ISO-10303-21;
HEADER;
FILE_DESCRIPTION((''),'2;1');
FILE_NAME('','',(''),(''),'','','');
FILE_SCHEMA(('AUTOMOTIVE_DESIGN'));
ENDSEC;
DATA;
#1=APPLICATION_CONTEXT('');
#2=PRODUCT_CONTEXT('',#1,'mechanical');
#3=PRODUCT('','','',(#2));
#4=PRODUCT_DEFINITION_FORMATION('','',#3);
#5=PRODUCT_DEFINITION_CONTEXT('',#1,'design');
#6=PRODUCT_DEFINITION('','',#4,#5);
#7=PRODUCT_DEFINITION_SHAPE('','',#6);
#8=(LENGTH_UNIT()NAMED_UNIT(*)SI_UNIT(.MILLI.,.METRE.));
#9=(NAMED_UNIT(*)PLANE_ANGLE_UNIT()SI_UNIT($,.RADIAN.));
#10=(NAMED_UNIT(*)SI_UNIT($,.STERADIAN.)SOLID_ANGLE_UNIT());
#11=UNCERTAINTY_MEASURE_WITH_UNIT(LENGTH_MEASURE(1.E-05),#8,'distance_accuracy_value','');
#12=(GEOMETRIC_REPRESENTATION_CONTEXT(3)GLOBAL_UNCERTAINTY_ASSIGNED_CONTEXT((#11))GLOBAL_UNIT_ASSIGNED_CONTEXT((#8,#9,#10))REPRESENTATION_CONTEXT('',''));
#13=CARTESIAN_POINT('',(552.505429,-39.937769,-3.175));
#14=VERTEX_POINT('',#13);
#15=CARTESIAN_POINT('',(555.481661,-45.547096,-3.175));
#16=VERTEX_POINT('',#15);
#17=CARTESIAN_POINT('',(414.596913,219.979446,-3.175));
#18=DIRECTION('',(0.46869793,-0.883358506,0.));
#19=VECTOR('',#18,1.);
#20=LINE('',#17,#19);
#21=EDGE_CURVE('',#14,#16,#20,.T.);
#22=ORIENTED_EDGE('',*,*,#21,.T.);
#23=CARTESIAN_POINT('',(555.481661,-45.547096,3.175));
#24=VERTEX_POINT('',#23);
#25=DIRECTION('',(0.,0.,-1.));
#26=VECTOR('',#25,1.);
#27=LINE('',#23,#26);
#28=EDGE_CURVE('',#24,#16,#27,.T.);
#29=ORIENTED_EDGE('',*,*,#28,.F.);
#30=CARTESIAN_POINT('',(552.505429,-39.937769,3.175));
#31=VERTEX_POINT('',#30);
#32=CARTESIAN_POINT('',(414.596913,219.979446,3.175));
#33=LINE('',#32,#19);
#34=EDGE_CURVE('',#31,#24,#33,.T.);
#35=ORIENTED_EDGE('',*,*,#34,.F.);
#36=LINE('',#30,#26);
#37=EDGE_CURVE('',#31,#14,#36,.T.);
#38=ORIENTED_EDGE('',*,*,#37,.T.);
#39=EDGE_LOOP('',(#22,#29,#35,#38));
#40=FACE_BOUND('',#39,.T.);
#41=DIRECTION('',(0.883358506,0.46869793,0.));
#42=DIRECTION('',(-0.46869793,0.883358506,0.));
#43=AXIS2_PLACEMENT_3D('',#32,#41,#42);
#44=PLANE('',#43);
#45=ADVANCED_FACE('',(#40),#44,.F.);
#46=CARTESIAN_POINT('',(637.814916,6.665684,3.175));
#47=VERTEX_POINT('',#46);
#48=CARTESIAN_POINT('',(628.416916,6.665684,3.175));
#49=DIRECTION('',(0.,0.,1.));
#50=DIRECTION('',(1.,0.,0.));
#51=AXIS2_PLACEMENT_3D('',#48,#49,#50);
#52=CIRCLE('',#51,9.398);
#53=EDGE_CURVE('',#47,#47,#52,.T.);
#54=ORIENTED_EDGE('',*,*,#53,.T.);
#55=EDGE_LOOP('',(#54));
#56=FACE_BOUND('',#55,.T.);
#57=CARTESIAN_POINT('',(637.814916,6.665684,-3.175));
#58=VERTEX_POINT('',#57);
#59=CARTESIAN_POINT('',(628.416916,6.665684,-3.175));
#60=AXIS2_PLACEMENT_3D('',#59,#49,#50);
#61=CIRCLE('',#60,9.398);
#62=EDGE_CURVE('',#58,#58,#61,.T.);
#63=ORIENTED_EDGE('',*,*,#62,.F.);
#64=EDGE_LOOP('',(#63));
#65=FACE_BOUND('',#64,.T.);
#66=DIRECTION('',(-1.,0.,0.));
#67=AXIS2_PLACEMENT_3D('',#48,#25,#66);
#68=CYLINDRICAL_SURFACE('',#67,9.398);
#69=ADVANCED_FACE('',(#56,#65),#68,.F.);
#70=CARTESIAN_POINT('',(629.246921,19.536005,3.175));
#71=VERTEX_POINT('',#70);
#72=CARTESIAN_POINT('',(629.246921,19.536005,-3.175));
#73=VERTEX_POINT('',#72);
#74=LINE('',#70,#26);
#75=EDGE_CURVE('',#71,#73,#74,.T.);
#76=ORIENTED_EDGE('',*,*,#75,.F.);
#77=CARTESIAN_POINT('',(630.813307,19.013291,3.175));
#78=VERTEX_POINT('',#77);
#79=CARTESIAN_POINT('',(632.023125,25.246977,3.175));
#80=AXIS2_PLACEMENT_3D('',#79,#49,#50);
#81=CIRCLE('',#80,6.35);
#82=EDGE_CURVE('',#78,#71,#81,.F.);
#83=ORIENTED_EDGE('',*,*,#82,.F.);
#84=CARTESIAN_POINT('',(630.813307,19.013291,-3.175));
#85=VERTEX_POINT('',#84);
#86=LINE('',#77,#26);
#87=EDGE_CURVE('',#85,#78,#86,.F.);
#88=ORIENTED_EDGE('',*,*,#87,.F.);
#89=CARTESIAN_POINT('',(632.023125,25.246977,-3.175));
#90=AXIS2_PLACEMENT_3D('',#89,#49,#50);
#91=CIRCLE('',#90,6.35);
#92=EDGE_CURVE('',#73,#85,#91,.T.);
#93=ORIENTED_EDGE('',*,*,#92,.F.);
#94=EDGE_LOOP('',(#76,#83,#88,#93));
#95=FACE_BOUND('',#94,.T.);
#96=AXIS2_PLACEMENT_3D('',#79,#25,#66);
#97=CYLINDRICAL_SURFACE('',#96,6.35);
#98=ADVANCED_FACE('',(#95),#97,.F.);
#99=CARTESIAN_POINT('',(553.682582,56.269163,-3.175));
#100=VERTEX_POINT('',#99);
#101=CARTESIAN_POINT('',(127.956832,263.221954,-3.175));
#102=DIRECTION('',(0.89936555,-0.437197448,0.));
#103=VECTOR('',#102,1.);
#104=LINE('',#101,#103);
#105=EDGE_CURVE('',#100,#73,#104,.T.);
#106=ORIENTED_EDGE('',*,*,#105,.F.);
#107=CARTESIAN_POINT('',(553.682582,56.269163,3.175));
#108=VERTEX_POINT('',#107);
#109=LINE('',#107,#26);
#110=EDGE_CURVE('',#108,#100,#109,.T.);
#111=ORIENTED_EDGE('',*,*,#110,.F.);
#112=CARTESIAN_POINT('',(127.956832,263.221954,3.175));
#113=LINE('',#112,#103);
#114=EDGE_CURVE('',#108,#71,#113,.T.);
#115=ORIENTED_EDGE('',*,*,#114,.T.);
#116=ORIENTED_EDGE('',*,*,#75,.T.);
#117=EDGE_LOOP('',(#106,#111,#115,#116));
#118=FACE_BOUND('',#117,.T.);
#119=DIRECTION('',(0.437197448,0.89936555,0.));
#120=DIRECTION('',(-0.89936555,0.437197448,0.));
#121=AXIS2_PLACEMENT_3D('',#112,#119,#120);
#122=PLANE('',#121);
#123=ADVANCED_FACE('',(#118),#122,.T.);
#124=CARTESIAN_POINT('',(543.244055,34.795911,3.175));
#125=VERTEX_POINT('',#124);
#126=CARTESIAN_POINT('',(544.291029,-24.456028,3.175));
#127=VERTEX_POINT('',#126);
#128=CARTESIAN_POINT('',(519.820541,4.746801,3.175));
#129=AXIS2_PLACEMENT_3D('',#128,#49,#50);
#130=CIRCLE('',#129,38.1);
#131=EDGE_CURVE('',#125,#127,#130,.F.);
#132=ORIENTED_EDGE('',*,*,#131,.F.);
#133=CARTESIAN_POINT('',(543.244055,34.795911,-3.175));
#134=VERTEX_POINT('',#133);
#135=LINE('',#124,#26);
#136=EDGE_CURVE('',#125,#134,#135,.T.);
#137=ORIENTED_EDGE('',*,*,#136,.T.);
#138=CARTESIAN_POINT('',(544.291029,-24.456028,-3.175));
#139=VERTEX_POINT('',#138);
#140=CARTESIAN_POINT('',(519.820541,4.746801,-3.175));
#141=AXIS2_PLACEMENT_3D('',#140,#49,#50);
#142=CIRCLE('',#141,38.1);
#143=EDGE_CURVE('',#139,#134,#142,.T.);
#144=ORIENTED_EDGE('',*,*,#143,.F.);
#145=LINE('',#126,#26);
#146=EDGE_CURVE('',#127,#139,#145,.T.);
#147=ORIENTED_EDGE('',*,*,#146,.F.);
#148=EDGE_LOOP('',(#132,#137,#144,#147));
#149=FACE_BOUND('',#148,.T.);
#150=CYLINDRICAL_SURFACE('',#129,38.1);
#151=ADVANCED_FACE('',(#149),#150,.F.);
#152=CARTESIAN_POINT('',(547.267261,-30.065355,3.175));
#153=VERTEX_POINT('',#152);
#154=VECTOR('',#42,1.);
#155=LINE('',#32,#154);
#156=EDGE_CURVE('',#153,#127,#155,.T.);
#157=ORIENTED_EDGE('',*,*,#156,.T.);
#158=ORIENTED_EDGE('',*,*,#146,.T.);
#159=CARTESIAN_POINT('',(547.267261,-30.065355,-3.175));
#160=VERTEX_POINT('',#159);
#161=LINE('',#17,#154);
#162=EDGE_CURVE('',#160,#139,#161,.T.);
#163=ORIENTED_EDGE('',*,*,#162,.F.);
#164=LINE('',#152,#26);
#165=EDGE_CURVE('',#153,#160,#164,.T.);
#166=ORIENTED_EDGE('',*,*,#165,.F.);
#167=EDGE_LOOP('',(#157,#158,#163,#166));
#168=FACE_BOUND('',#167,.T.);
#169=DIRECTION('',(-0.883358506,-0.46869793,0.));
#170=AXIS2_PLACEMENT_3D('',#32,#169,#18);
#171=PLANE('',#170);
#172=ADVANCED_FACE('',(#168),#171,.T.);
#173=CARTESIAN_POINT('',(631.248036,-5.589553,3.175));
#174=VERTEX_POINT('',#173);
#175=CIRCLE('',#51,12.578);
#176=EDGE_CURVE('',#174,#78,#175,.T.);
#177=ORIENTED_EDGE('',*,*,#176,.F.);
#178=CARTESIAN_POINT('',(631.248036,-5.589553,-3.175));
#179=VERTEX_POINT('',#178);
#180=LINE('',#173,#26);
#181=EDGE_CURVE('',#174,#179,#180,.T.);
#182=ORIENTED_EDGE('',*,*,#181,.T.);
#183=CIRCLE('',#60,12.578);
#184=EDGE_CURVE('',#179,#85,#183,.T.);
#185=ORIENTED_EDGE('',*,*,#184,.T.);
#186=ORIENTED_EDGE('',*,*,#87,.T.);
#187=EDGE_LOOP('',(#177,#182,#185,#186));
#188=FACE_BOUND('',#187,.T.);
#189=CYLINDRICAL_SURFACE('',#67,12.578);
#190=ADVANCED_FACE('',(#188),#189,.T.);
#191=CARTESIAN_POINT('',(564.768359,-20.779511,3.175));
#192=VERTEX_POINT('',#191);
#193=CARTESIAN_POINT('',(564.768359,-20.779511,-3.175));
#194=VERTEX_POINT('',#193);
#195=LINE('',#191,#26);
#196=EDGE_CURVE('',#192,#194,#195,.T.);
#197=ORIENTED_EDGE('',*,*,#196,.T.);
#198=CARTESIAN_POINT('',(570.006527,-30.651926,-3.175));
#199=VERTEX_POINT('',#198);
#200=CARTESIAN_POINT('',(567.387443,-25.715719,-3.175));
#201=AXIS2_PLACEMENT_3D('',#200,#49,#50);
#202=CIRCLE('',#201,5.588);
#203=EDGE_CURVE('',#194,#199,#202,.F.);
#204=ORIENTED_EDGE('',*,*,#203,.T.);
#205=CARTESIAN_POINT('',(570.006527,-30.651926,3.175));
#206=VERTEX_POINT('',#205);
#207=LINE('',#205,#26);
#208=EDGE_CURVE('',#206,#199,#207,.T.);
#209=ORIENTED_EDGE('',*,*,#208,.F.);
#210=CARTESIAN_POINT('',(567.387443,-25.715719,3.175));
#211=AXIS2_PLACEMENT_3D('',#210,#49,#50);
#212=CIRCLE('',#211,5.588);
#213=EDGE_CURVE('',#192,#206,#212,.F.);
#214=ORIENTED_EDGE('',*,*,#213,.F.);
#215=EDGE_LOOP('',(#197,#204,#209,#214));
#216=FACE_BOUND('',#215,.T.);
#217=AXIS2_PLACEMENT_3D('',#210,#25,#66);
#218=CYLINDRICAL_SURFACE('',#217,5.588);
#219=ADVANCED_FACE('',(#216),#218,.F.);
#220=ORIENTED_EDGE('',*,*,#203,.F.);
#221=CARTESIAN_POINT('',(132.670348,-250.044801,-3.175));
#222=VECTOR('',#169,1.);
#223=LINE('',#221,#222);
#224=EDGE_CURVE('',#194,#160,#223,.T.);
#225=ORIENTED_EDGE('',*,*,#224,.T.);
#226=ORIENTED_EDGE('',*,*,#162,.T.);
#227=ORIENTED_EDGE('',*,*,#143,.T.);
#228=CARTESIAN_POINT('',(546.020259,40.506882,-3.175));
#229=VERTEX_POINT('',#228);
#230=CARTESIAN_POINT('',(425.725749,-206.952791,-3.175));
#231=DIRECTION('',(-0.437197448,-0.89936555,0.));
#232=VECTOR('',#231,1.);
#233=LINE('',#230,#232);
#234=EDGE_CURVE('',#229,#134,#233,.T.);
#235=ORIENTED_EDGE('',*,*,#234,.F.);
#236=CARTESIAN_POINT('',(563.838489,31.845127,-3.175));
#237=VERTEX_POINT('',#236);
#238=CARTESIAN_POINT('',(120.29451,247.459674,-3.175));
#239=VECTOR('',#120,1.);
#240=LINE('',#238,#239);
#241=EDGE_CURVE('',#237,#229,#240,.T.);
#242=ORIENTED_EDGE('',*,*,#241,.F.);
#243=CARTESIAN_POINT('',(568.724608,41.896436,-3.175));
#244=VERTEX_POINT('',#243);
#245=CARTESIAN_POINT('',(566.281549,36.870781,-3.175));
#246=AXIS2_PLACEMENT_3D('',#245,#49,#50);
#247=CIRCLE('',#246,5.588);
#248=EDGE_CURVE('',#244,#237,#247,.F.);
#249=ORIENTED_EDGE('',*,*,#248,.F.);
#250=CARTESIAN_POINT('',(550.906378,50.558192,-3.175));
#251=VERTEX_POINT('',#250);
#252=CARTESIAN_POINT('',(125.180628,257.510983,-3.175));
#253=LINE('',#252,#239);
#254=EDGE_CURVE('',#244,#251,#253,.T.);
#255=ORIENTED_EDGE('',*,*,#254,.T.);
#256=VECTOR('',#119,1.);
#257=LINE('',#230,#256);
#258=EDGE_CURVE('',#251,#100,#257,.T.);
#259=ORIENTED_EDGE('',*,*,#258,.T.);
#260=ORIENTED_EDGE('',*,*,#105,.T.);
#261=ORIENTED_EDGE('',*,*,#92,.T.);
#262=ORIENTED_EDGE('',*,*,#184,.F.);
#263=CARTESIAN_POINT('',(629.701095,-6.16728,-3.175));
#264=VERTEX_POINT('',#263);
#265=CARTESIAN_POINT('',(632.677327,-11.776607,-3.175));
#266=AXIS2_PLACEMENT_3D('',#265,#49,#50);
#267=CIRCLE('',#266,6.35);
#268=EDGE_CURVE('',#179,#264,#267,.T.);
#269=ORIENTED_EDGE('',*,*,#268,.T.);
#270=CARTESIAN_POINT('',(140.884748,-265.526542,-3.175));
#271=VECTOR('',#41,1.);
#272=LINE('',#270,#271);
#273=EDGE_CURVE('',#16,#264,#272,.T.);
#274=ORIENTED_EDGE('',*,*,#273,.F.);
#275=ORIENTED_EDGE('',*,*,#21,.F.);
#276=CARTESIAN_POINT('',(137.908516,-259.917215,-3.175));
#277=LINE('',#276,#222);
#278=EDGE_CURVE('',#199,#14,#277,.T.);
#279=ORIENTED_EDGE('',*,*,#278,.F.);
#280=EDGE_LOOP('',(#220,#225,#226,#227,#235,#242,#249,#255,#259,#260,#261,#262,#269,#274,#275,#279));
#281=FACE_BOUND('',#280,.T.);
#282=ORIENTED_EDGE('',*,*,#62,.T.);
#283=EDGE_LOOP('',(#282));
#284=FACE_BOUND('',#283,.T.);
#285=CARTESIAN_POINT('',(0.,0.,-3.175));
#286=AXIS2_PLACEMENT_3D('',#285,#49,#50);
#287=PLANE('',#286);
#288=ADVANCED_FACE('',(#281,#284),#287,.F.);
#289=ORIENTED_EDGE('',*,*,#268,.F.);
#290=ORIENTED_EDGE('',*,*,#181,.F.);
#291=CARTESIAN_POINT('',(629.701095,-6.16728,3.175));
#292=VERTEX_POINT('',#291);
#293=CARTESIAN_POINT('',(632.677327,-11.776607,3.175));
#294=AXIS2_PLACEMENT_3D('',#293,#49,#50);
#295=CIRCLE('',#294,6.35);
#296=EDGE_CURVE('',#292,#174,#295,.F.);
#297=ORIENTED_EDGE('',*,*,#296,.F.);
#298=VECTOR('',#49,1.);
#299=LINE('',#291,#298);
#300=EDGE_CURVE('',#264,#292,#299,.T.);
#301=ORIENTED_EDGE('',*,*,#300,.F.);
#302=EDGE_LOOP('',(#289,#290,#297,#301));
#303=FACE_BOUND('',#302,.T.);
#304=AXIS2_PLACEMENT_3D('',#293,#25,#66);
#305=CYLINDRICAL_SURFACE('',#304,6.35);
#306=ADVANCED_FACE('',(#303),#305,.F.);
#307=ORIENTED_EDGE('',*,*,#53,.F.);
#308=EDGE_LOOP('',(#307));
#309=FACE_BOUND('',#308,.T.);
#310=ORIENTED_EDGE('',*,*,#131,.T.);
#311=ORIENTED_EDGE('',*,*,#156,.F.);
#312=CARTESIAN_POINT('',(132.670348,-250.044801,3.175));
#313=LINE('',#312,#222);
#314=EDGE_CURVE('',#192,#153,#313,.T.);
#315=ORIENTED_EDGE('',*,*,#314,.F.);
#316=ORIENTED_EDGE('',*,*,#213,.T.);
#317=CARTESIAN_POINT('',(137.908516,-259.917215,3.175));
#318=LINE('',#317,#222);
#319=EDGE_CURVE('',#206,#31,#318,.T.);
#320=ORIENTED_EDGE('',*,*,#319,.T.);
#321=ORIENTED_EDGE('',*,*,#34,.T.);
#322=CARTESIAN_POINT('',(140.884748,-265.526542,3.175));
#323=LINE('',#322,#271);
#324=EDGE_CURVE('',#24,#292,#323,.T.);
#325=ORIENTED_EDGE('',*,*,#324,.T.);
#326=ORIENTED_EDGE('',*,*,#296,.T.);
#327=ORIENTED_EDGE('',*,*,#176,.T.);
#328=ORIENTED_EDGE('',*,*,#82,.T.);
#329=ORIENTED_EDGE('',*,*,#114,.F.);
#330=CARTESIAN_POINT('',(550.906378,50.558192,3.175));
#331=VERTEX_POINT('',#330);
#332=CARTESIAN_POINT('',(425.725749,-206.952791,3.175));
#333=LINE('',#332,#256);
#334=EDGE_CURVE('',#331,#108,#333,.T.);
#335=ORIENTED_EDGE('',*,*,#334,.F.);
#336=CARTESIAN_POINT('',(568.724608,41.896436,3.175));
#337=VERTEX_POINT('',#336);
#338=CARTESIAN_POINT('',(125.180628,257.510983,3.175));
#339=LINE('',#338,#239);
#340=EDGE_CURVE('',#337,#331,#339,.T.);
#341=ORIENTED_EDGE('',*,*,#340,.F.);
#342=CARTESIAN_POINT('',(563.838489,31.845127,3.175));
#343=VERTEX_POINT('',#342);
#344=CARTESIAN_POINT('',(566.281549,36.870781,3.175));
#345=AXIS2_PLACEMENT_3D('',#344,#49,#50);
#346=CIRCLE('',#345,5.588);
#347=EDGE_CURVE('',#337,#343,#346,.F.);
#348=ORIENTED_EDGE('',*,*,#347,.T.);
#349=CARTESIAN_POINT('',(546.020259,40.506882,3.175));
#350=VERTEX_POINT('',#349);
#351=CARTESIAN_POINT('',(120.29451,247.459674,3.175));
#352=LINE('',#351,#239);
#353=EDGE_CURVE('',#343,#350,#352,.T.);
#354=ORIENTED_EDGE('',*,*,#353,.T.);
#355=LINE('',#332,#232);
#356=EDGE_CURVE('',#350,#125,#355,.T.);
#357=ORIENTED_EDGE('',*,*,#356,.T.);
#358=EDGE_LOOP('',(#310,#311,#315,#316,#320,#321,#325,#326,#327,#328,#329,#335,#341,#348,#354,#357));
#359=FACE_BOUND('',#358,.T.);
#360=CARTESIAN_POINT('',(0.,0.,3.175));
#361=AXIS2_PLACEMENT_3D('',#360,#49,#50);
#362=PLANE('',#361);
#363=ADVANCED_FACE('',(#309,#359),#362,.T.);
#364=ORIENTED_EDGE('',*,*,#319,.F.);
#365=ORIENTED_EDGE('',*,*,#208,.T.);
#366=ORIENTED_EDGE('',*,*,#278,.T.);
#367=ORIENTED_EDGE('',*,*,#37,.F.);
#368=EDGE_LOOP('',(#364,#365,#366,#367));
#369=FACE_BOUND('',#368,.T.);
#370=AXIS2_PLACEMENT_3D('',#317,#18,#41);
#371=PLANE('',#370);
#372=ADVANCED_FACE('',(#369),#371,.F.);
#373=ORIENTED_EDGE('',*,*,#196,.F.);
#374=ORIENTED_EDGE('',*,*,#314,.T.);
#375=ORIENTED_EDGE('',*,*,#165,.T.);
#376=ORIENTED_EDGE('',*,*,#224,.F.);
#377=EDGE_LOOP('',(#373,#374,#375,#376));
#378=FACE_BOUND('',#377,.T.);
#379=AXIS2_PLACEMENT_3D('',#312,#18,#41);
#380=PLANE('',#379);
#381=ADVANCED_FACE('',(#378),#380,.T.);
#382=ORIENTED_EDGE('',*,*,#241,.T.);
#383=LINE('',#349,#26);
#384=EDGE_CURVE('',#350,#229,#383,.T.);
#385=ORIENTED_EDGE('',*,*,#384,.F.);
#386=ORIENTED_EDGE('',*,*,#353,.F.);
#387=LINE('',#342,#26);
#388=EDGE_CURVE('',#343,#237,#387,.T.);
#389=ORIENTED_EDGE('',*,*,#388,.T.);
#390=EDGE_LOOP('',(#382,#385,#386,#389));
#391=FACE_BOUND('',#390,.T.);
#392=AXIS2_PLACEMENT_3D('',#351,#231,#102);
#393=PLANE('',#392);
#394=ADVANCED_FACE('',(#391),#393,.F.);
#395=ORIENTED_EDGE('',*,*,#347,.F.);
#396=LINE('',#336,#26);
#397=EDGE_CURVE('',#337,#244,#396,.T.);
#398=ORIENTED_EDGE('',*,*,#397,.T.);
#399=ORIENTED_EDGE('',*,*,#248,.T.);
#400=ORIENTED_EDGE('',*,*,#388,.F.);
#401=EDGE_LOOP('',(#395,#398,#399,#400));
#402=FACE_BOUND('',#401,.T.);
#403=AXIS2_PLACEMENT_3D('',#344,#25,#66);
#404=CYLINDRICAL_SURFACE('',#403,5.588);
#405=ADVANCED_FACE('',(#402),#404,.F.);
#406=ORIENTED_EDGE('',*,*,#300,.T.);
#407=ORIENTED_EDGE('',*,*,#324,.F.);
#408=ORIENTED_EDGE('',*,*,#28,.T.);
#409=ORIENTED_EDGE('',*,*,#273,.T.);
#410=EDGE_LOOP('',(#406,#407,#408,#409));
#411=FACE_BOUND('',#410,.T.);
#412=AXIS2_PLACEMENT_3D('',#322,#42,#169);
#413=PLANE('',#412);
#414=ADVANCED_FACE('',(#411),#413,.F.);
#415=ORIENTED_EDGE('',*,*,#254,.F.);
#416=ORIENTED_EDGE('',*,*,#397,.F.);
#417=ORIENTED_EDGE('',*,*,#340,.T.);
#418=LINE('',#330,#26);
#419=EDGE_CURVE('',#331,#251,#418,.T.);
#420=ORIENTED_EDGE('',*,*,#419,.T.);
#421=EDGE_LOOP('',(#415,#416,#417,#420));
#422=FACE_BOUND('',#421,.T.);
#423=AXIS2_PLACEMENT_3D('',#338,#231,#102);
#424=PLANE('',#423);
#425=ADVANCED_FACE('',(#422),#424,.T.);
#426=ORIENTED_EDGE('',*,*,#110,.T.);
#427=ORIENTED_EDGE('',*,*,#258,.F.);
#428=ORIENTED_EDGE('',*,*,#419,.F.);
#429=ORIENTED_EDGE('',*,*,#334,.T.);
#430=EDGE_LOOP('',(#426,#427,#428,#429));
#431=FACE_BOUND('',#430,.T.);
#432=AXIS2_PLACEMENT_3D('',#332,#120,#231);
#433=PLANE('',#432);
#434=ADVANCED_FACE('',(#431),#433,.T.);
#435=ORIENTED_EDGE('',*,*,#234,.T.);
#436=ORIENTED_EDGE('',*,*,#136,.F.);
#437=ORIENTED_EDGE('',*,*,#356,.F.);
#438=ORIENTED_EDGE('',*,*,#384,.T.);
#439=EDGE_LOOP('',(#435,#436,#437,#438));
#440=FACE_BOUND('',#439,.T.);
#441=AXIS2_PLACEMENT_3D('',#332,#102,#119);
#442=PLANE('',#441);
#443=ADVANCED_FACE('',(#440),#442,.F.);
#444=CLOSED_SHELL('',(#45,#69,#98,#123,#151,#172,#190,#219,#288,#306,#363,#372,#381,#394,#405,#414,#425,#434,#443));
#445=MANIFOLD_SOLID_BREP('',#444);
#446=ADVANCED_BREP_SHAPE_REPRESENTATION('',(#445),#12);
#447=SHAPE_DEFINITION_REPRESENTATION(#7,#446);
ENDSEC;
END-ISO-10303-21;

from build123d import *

# Parameters (mm, degrees)
SKETCH1_R           = 12.578
SKETCH1_R_2         = 9.398
BOSS_EXTRUDE1_DEPTH = 3.175
FILLET1_R           = 38.1
FILLET2_R           = 6.35


with BuildPart() as part:
    # Sketch1 → Boss-Extrude1 (new, symmetric)
    # profile 1 of 4: a face of its own
    with BuildSketch(Plane.XY):
        with BuildLine():
            Line((550.906377784, 50.55819174), (568.724608053, 41.896435909))
            ThreePointArc((568.724608053, 41.896435909), (571.307203408, 34.427721881), (563.838489379, 31.845126527))
            Line((563.838489379, 31.845126527), (546.02025911, 40.506882357))
            Line((546.02025911, 40.506882357), (543.244055318, 34.795911117))
            Line((543.244055318, 34.795911117), (602.068897859, 6.200118203))
            Line((602.068897859, 6.200118203), (619.322536705, 15.354662769))
            ThreePointArc((619.322536705, 15.354662769), (624.245533427, 18.531839743), (630.07371037, 19.134088663))
            Line((630.07371037, 19.134088663), (553.682581576, 56.26916298))
            Line((553.682581576, 56.26916298), (550.906377784, 50.55819174))
        make_face()
    # profile 2 of 4: a face of its own
    with BuildSketch(Plane.XY):
        with BuildLine():
            ThreePointArc((619.635184113, -2.3391632), (615.840878926, 6.443467165), (619.322536705, 15.354662769))
            Line((619.322536705, 15.354662769), (602.068897859, 6.200118203))
            Line((602.068897859, 6.200118203), (619.635184113, -2.3391632))
        make_face()
    # profile 3 of 4: a face of its own
    with BuildSketch(Plane.XY):
        with Locations((628.416915809, 6.665683962)):
            Circle(SKETCH1_R)
        with Locations((628.416915809, 6.665683962)):
            Circle(SKETCH1_R_2, mode=Mode.SUBTRACT)
    # profile 4 of 4: a face of its own
    with BuildSketch(Plane.XY):
        with BuildLine():
            Line((619.635184113, -2.3391632), (602.068897859, 6.200118203))
            Line((602.068897859, 6.200118203), (544.291028723, -24.456028169))
            Line((544.291028723, -24.456028169), (547.267260579, -30.065354683))
            Line((547.267260579, -30.065354683), (564.768359303, -20.779511294))
            ThreePointArc((564.768359303, -20.779511294), (572.323650668, -23.096634594), (570.006527369, -30.651925959))
            Line((570.006527369, -30.651925959), (552.505428645, -39.937769348))
            Line((552.505428645, -39.937769348), (555.4816605, -45.547095862))
            Line((555.4816605, -45.547095862), (630.513168482, -5.736404924))
            ThreePointArc((630.513168482, -5.736404924), (624.667353131, -5.3404338), (619.635184113, -2.3391632))
        make_face()
    extrude(amount=BOSS_EXTRUDE1_DEPTH, both=True)

    # Fillet1
    # the kernel refuses this fillet: 38.1 mm, written as the material it adds along each edge
    with BuildSketch(Plane(origin=(602.068897859, 6.200118203, -3.175), x_dir=(-0.8993655496308585, 0.43719744754193623, 0), z_dir=(0, 0, 1))) as fillet1_piece_1:
        with BuildLine():
            CenterArc((73.33595186, 37.265834599), FILLET1_R, 155.886500773, 102.102011478)
            Line((38.560636086, 52.831418843), (0, 0))
            Line((0, 0), (65.407044516, 0))
        make_face()
    extrude(amount=6.35)

    # Fillet2
    fillet2_edges = [part.edges().sort_by_distance(p)[0] for p in [
        (630.07371037, 19.134088663, 0),
        (630.513168482, -5.736404924, 0),
    ]]
    fillet(fillet2_edges, radius=FILLET2_R)


solid = part.part
